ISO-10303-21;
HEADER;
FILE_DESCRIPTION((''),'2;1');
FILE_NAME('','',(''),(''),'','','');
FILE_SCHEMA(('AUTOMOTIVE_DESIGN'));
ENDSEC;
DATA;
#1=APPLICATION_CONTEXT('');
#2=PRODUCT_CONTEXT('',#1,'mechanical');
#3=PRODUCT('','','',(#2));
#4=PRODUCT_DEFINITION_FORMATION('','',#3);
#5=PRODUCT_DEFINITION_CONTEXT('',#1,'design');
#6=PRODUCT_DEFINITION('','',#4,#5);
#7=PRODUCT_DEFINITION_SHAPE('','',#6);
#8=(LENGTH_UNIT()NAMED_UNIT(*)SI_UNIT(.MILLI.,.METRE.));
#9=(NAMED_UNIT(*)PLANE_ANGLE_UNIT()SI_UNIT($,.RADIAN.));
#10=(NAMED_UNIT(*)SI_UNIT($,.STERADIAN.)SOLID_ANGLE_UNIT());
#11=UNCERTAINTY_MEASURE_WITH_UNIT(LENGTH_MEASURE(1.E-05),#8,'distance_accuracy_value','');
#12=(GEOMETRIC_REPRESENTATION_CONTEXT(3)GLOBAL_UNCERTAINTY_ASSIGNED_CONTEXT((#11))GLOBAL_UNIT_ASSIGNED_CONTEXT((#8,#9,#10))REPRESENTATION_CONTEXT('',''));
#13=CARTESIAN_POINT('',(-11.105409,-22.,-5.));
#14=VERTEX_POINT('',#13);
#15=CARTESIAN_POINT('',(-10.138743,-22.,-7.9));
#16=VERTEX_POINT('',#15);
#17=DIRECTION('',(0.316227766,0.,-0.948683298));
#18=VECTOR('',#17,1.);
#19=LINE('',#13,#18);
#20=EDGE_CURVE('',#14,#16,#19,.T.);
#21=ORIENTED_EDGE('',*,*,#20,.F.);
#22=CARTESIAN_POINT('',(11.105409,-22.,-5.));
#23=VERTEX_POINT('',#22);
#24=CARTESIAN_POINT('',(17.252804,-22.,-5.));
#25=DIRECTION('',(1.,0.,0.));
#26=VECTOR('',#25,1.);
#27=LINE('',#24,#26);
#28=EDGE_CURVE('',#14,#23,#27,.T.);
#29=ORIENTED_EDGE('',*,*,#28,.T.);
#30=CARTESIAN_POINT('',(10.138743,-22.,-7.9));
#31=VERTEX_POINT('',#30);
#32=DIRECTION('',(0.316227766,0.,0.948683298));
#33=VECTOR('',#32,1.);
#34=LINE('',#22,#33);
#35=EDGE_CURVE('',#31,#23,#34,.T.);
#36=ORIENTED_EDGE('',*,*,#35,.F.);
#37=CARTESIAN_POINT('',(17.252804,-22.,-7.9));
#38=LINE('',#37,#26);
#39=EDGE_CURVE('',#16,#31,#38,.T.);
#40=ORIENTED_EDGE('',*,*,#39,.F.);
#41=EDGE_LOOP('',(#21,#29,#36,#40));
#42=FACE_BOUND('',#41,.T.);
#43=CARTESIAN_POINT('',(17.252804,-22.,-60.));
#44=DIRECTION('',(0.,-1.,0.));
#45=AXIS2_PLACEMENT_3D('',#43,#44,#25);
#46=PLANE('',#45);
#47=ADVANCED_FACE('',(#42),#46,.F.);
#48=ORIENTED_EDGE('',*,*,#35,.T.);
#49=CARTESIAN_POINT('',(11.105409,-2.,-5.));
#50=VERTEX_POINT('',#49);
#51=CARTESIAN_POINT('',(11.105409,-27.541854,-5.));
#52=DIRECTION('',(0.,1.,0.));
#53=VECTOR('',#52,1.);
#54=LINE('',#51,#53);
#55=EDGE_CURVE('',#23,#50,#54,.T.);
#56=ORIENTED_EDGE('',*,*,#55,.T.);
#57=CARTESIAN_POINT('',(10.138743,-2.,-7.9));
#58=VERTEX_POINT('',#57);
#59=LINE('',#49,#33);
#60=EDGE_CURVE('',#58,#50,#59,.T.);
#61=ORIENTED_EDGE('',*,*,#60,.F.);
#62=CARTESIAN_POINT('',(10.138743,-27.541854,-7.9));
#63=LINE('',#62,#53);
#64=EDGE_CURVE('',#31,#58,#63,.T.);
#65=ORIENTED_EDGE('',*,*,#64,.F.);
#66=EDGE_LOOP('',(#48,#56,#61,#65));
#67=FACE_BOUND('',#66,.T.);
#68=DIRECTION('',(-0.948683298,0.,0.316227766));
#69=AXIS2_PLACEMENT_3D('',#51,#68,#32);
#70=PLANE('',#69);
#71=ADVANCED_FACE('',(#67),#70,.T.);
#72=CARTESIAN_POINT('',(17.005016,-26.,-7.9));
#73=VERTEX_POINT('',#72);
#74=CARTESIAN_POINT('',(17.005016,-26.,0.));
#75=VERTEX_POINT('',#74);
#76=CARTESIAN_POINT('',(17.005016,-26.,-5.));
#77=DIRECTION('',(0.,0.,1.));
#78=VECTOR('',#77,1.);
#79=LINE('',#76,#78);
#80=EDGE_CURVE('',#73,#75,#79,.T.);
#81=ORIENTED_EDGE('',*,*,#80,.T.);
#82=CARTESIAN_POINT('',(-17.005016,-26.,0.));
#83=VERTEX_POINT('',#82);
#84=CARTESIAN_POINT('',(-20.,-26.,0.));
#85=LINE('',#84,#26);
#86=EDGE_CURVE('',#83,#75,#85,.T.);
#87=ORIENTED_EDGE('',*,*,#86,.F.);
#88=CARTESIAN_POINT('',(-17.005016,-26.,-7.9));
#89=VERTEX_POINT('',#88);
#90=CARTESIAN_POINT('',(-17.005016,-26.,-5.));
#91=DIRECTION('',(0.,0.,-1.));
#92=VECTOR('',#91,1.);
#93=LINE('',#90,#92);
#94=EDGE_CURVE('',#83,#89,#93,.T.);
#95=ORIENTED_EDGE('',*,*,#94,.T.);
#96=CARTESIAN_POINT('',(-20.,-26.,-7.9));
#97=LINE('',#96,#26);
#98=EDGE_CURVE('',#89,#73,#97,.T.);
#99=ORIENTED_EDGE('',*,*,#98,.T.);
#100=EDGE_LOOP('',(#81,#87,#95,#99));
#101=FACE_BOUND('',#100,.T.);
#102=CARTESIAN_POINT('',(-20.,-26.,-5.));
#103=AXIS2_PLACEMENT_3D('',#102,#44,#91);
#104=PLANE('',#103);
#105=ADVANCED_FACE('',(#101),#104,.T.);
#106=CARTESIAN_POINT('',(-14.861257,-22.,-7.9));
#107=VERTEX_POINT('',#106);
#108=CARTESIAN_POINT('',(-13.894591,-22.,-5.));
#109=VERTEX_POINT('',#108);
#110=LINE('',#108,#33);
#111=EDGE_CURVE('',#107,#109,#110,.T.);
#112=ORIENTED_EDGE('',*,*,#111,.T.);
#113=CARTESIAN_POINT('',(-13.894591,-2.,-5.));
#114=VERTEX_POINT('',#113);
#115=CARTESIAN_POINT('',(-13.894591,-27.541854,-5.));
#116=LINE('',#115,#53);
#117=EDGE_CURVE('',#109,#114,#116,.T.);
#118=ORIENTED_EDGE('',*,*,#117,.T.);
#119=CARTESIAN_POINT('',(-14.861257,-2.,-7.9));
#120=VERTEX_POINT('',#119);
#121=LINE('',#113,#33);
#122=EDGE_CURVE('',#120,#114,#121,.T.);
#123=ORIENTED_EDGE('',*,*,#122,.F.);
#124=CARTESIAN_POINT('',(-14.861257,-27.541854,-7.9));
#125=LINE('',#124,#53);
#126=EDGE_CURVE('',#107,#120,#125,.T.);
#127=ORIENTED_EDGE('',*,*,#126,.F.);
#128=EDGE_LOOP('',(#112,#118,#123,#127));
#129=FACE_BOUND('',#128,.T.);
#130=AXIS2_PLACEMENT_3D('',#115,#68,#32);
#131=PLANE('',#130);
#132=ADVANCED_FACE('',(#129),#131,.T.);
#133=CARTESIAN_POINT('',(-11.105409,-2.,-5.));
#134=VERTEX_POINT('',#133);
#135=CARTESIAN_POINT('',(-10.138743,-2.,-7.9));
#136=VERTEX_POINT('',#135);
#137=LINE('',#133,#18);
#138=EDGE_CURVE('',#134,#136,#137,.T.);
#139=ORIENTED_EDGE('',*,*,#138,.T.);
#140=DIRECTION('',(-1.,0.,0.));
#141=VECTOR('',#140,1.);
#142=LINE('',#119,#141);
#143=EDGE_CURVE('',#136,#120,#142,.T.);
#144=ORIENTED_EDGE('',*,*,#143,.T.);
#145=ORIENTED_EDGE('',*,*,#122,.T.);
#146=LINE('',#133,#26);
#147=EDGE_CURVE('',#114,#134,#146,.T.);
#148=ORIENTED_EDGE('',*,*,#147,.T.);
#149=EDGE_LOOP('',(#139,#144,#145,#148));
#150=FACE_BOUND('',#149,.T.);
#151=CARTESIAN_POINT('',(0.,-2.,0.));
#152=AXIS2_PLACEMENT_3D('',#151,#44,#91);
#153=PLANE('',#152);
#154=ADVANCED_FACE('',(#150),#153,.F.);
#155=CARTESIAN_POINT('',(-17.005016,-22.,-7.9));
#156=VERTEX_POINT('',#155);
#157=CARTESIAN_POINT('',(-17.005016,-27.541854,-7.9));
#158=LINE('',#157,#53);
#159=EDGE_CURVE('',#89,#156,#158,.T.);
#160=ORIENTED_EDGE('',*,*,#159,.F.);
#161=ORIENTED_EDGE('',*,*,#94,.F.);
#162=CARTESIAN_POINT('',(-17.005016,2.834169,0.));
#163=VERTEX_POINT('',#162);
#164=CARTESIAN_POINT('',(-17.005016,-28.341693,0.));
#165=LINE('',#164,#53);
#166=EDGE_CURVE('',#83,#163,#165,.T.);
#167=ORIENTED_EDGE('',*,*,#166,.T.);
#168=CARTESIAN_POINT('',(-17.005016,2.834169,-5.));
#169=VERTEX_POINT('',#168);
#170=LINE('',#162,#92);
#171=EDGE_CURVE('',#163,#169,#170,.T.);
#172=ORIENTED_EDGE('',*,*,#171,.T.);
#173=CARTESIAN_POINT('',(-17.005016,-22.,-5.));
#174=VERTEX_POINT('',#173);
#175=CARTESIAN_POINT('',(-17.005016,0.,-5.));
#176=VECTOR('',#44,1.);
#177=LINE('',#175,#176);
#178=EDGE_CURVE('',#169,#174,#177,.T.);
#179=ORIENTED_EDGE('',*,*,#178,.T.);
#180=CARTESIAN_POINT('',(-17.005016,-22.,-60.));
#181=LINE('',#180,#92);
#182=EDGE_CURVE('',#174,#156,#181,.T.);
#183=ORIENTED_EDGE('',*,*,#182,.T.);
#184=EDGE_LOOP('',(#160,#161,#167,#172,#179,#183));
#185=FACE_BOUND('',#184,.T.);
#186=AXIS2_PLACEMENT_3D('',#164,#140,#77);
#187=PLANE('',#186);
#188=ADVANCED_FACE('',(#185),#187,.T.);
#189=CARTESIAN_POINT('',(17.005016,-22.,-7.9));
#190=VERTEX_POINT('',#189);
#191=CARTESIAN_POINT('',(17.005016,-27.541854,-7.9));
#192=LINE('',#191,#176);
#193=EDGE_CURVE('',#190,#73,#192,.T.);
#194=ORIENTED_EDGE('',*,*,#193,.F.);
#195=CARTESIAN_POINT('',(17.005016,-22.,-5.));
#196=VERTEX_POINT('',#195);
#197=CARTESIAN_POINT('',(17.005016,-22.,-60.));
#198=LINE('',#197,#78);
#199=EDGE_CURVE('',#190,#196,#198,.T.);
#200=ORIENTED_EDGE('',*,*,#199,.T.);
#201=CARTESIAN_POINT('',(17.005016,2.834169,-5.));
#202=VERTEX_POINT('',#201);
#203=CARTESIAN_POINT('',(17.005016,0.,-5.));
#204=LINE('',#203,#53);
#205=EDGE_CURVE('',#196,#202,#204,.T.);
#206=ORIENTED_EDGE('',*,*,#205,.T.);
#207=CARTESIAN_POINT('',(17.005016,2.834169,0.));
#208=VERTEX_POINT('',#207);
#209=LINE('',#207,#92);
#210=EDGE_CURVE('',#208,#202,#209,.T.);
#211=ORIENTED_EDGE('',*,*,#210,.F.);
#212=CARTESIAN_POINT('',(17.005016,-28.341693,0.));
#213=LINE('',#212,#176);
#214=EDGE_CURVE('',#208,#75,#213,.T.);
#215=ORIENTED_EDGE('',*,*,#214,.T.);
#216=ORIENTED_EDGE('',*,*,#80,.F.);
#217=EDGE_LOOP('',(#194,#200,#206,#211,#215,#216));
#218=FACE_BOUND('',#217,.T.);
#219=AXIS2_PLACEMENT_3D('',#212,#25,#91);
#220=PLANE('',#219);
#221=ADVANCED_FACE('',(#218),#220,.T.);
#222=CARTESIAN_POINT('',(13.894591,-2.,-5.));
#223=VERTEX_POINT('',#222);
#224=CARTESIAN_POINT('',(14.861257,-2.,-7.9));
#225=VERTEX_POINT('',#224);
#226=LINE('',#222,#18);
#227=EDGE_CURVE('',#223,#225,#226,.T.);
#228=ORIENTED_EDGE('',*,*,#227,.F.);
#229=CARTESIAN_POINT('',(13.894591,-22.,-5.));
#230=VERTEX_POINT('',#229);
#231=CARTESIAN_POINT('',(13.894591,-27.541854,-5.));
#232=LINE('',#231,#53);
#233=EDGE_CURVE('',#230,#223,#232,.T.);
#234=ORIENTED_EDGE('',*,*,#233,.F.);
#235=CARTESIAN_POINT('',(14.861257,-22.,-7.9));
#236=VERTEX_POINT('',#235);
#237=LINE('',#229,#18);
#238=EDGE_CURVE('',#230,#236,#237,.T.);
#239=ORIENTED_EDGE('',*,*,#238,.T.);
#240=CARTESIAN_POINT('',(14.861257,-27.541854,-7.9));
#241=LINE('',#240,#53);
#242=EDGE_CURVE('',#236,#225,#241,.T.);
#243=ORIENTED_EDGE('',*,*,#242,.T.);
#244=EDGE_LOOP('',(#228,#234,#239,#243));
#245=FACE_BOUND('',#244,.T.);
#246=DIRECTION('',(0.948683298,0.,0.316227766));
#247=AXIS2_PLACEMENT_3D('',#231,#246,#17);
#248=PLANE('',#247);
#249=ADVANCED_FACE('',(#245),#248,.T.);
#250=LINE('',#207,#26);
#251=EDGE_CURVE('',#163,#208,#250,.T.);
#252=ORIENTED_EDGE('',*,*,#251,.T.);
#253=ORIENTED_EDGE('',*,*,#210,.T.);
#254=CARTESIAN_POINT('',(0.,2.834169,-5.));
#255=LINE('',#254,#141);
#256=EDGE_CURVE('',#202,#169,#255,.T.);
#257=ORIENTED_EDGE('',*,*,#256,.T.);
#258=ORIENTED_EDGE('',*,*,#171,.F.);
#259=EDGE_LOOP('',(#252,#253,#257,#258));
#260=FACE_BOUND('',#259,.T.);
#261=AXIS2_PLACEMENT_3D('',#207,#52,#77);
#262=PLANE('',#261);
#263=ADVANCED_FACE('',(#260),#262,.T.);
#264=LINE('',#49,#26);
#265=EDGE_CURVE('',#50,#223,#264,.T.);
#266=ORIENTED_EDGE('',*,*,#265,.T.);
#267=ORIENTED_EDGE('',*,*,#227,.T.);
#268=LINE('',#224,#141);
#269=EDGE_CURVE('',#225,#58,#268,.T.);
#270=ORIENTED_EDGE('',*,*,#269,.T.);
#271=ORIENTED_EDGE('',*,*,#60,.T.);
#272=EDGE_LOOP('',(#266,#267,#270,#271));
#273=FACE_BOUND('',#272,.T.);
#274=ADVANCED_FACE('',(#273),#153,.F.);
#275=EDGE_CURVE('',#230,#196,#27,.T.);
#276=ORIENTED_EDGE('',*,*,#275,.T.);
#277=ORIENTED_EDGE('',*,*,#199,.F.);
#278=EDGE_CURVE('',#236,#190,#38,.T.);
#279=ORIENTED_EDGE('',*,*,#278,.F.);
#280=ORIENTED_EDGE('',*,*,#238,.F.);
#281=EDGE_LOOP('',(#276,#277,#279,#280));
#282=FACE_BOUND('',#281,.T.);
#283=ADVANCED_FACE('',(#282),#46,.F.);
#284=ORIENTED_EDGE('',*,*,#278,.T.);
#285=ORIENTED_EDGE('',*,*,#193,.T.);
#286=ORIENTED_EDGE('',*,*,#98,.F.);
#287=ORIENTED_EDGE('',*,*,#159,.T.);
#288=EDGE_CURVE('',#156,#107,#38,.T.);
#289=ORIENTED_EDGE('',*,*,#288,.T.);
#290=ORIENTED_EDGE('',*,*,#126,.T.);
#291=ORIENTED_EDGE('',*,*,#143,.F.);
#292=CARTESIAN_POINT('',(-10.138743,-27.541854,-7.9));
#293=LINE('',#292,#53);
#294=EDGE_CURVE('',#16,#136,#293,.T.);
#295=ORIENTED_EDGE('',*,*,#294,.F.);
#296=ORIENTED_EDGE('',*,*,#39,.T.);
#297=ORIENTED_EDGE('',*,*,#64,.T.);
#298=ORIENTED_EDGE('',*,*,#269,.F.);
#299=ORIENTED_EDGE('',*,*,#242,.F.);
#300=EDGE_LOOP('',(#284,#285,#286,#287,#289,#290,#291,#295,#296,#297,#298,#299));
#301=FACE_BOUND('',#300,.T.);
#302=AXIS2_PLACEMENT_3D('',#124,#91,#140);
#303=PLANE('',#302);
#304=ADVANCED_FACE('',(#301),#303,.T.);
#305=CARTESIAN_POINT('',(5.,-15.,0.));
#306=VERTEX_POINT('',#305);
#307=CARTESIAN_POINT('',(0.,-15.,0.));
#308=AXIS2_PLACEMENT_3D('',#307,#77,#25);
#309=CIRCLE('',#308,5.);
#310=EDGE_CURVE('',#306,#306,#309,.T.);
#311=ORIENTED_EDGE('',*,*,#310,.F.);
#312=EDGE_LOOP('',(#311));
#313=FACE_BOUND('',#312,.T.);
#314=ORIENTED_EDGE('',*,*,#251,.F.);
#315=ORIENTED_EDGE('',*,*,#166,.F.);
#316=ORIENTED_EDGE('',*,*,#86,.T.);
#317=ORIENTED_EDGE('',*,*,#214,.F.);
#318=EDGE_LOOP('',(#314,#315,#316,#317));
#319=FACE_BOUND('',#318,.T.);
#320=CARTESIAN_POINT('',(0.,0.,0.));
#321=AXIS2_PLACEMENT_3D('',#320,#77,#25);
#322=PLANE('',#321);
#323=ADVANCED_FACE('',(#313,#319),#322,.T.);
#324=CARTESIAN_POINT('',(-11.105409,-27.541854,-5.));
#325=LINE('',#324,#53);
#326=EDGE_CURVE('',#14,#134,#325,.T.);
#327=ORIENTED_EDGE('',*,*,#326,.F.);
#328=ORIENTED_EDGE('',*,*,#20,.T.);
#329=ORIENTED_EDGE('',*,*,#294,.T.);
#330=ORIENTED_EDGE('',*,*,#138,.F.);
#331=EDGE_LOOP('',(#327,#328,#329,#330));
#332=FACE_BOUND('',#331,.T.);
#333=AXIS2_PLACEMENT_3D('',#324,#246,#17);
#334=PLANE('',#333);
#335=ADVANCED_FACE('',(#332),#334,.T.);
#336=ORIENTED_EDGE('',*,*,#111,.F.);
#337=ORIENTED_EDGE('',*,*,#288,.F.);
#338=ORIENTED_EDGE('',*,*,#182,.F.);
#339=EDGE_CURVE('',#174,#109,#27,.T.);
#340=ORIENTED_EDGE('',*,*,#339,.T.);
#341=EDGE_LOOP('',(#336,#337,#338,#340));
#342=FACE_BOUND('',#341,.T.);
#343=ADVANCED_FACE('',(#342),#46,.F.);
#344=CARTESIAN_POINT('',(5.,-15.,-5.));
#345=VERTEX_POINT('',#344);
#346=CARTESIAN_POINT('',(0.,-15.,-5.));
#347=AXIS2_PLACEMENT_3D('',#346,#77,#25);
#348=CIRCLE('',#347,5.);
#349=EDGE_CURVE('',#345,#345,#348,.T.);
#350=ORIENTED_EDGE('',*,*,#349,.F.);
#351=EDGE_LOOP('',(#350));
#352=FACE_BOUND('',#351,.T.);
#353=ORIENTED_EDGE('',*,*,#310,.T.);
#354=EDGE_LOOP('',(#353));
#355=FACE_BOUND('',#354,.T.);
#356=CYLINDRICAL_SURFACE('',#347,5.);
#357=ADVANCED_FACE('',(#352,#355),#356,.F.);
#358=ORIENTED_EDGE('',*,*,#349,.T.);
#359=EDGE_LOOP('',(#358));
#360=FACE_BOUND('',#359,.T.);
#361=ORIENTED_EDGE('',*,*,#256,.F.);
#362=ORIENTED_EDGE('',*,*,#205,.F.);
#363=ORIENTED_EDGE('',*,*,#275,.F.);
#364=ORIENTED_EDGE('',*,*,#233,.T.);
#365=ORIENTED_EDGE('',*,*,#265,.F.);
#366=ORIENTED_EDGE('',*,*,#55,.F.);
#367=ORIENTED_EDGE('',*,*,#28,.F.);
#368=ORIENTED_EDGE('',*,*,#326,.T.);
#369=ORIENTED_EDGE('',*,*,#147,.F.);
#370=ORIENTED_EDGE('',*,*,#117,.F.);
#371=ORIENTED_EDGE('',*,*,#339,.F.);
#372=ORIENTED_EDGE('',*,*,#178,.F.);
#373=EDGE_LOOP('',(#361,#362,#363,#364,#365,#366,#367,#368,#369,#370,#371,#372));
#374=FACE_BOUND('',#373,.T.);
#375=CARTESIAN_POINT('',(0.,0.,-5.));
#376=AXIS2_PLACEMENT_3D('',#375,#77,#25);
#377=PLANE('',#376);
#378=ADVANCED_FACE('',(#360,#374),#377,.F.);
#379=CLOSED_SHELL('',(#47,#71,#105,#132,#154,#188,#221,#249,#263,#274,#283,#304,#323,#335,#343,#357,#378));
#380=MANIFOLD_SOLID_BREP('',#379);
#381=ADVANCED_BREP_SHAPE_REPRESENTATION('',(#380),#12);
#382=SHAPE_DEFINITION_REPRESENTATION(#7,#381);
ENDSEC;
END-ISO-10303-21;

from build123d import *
from OCP.BRepFilletAPI import BRepFilletAPI_MakeChamfer

# Parameters (mm, degrees)
SKETCH_1_R          = 5
EXTRUDE_1_DEPTH     = 5
EXTRUDE_2_REACH     = 42.012
EXTRUDE_3_DEPTH     = 55
EXTRUDE_4_DEPTH     = 20
FILLET_1_R          = 10
CHAMFER_1_SIZE      = 1
CHAMFER_1_SIZE2     = 1.741048535
CHAMFER_1_SIZE2_2   = 3.661578825
CHAMFER_1_SIZE2_3   = 2.732050808
CUT_EXTRUDE_1_REACH = 86.876
SKETCH_5_R          = 1.65
SKETCH_6_R          = 54.70604167
CUT_EXTRUDE_2_DEPTH = 66.501221402
SKETCH_7_W          = 77.77608505
SKETCH_7_H          = 88.124851988
SKETCH_7_W_2        = 34.010032192
SKETCH_7_H_2        = 31.175862843
CUT_EXTRUDE_3_DEPTH = 41.477277576


with BuildPart() as part:
    # 草图1 → 凸台-拉伸1 (new body)
    with BuildSketch(Plane.XY):
        Polygon((-20, 26), (20, 26), (30, 0), (20, -26), (-20, -26), (-30, 0), align=None)
        with Locations((0, -15)):
            Circle(SKETCH_1_R, mode=Mode.SUBTRACT)
    extrude(amount=-EXTRUDE_1_DEPTH)

    # 凸台-拉伸2: up to this plane
    extrude_2_end = Plane(origin=(0, 24.665063509, -42.72114317), z_dir=(0, 0.499999999999998, -0.8660254037844398))
    # 草图2 → 凸台-拉伸2 (add, up to the surface)
    with BuildSketch(Plane(origin=(0, 0, -5), x_dir=(-1, 0, 0), z_dir=(0, 0, -1)), mode=Mode.PRIVATE) as extrude_2_sk1:
        Polygon((-20, 26), (20, 26), (21.923076923, 21), (-21.923076923, 21), align=None)
    extrude_2_tool1 = split(extrude(extrude_2_sk1.sketch, amount=EXTRUDE_2_REACH, mode=Mode.PRIVATE), bisect_by=extrude_2_end, keep=Keep.BOTH, mode=Mode.PRIVATE)
    add(extrude_2_tool1.solids().sort_by_distance((0, 23.461774, -5))[0])

    # 草图3 → 凸台-拉伸3 (add)
    with BuildSketch(Plane(origin=(0, 0, -5), x_dir=(-1, 0, 0), z_dir=(0, 0, -1))):
        Polygon((23.846153846, -16), (20, -26), (-20, -26), (-23.846153846, -16), (-19.560495915, -16), (-17.252803607, -22), (17.252803607, -22), (19.560495915, -16), align=None)
    extrude(amount=EXTRUDE_3_DEPTH)

    # 草图4 → 凸台-拉伸4 (add)
    with BuildSketch(Plane(origin=(0, -2, 0), x_dir=(1, 0, 0), z_dir=(0, 1, 0))):
        Polygon((11.105409255, 5), (10.138742589, 7.9), (14.861257411, 7.9), (13.894590745, 5), align=None)
        Polygon((-11.105409255, 5), (-13.894590745, 5), (-14.861257411, 7.9), (-10.138742589, 7.9), align=None)
    extrude(amount=-EXTRUDE_4_DEPTH)

    # 圆角1
    fillet_1_edges = [part.edges().sort_by_distance(p)[0] for p in [
        (-21.70332488, -16, -60),
        (21.70332488, -16, -5),
        (-21.70332488, -16, -5),
        (-20.961538462, 23.5, -43.393792901),
        (20.961538462, 23.5, -43.393792901),
    ]]
    fillet(fillet_1_edges, radius=FILLET_1_R - 0.0001)  # a hair under: the kernel refuses the full size

    # 倒角1: one chamfer whose edges measure the first distance from different faces: ONE call of the kernel's chamfer builder (chamfer() names one face for all edges)
    chamfer_1_edges_1 = [part.edges().sort_by_distance(p)[0] for p in [
        (20, 26, -16.238036635),
    ]]
    chamfer_1_side_1 = [part.faces().sort_by_distance(p)[0] for p in [
        (20.161601575, 25.579835904, -16.238036635),
    ]]
    chamfer_1_edges_2 = [part.edges().sort_by_distance(p)[0] for p in [
        (17.633378474, 26, -39.139308282),
        (-17.633378474, 26, -39.139308282),
    ]]
    chamfer_1_side_2 = [part.faces().sort_by_distance(p)[0] for p in [
        (0, 26, -20.586375743),
    ]]
    chamfer_1_edges_3 = [part.edges().sort_by_distance(p)[0] for p in [
        (0, 26, -41.950417228),
    ]]
    chamfer_1_side_3 = [part.faces().sort_by_distance(p)[0] for p in [
        (0, 26, -20.586375743),
    ]]
    chamfer_1_edges_4 = [part.edges().sort_by_distance(p)[0] for p in [
        (-20, 26, -16.238036635),
    ]]
    chamfer_1_side_4 = [part.faces().sort_by_distance(p)[0] for p in [
        (-21.761475348, 21.420164096, -20.181412308),
    ]]
    chamfer_1 = BRepFilletAPI_MakeChamfer(part.part.solid().wrapped)
    for e in chamfer_1_edges_1:
        chamfer_1.Add(CHAMFER_1_SIZE, CHAMFER_1_SIZE2, e.wrapped, chamfer_1_side_1[0].wrapped)  # the first distance lies on this face
    for e in chamfer_1_edges_2:
        chamfer_1.Add(CHAMFER_1_SIZE, CHAMFER_1_SIZE2_2, e.wrapped, chamfer_1_side_2[0].wrapped)  # the first distance lies on this face
    for e in chamfer_1_edges_3:
        chamfer_1.Add(CHAMFER_1_SIZE, CHAMFER_1_SIZE2_3, e.wrapped, chamfer_1_side_3[0].wrapped)  # the first distance lies on this face
    for e in chamfer_1_edges_4:
        chamfer_1.Add(CHAMFER_1_SIZE, CHAMFER_1_SIZE2, e.wrapped, chamfer_1_side_4[0].wrapped)  # the first distance lies on this face
    add(Compound.cast(chamfer_1.Shape()), mode=Mode.REPLACE)

    # 草图5 → 切除-拉伸1 (cut, up to next)
    with BuildSketch(Plane(origin=(0, 26, 0), x_dir=(1, 0, 0), z_dir=(0, 1, 0)), mode=Mode.PRIVATE) as cut_extrude_1_sk1:
        with Locations((14, 36)):
            Circle(SKETCH_5_R)
    cut_extrude_1_tool1 = extrude(cut_extrude_1_sk1.sketch, amount=-CUT_EXTRUDE_1_REACH, mode=Mode.PRIVATE) & part.part
    # 草图5 → 切除-拉伸1 (cut, up to next)
    with BuildSketch(Plane(origin=(0, 26, 0), x_dir=(1, 0, 0), z_dir=(0, 1, 0)), mode=Mode.PRIVATE) as cut_extrude_1_sk2:
        with Locations((14, 8)):
            Circle(SKETCH_5_R)
    cut_extrude_1_tool2 = extrude(cut_extrude_1_sk2.sketch, amount=-CUT_EXTRUDE_1_REACH, mode=Mode.PRIVATE) & part.part
    # 草图5 → 切除-拉伸1 (cut, up to next)
    with BuildSketch(Plane(origin=(0, 26, 0), x_dir=(1, 0, 0), z_dir=(0, 1, 0)), mode=Mode.PRIVATE) as cut_extrude_1_sk3:
        with Locations((-14, 8)):
            Circle(SKETCH_5_R)
    cut_extrude_1_tool3 = extrude(cut_extrude_1_sk3.sketch, amount=-CUT_EXTRUDE_1_REACH, mode=Mode.PRIVATE) & part.part
    # 草图5 → 切除-拉伸1 (cut, up to next)
    with BuildSketch(Plane(origin=(0, 26, 0), x_dir=(1, 0, 0), z_dir=(0, 1, 0)), mode=Mode.PRIVATE) as cut_extrude_1_sk4:
        with Locations((-14, 36)):
            Circle(SKETCH_5_R)
    cut_extrude_1_tool4 = extrude(cut_extrude_1_sk4.sketch, amount=-CUT_EXTRUDE_1_REACH, mode=Mode.PRIVATE) & part.part
    # 草图5 → 切除-拉伸1 (cut, up to next)
    with BuildSketch(Plane(origin=(0, 26, 0), x_dir=(1, 0, 0), z_dir=(0, 1, 0)), mode=Mode.PRIVATE) as cut_extrude_1_sk5:
        with Locations((10, 22)):
            Circle(SKETCH_5_R)
    cut_extrude_1_tool5 = extrude(cut_extrude_1_sk5.sketch, amount=-CUT_EXTRUDE_1_REACH, mode=Mode.PRIVATE) & part.part
    # 草图5 → 切除-拉伸1 (cut, up to next)
    with BuildSketch(Plane(origin=(0, 26, 0), x_dir=(1, 0, 0), z_dir=(0, 1, 0)), mode=Mode.PRIVATE) as cut_extrude_1_sk6:
        with Locations((-10, 22)):
            Circle(SKETCH_5_R)
    cut_extrude_1_tool6 = extrude(cut_extrude_1_sk6.sketch, amount=-CUT_EXTRUDE_1_REACH, mode=Mode.PRIVATE) & part.part
    # 草图5 → 切除-拉伸1 (cut, up to next)
    with BuildSketch(Plane(origin=(0, 26, 0), x_dir=(1, 0, 0), z_dir=(0, 1, 0)), mode=Mode.PRIVATE) as cut_extrude_1_sk7:
        with Locations((0, 12)):
            Circle(SKETCH_5_R)
    cut_extrude_1_tool7 = extrude(cut_extrude_1_sk7.sketch, amount=-CUT_EXTRUDE_1_REACH, mode=Mode.PRIVATE) & part.part
    # 草图5 → 切除-拉伸1 (cut, up to next)
    with BuildSketch(Plane(origin=(0, 26, 0), x_dir=(1, 0, 0), z_dir=(0, 1, 0)), mode=Mode.PRIVATE) as cut_extrude_1_sk8:
        with Locations((0, 32)):
            Circle(SKETCH_5_R)
    cut_extrude_1_tool8 = extrude(cut_extrude_1_sk8.sketch, amount=-CUT_EXTRUDE_1_REACH, mode=Mode.PRIVATE) & part.part
    add(cut_extrude_1_tool1.solids().sort_by_distance((14, 26, -36))[0], mode=Mode.SUBTRACT)
    add(cut_extrude_1_tool2.solids().sort_by_distance((14, 26, -8))[0], mode=Mode.SUBTRACT)
    add(cut_extrude_1_tool3.solids().sort_by_distance((-14, 26, -8))[0], mode=Mode.SUBTRACT)
    add(cut_extrude_1_tool4.solids().sort_by_distance((-14, 26, -36))[0], mode=Mode.SUBTRACT)
    add(cut_extrude_1_tool5.solids().sort_by_distance((10, 26, -22))[0], mode=Mode.SUBTRACT)
    add(cut_extrude_1_tool6.solids().sort_by_distance((-10, 26, -22))[0], mode=Mode.SUBTRACT)
    add(cut_extrude_1_tool7.solids().sort_by_distance((0, 26, -12))[0], mode=Mode.SUBTRACT)
    add(cut_extrude_1_tool8.solids().sort_by_distance((0, 26, -32))[0], mode=Mode.SUBTRACT)

    # 草图6 → 切除-拉伸2 (cut, through all)
    with BuildSketch(Plane(origin=(0, 0, -7.9), x_dir=(-1, 0, 0), z_dir=(0, 0, -1))):
        with Locations((0, -15)):
            Circle(SKETCH_6_R)
    extrude(amount=CUT_EXTRUDE_2_DEPTH, mode=Mode.SUBTRACT)

    # 草图7 → 切除-拉伸3 (cut, through all)
    with BuildSketch(Plane(origin=(0, 0, -7.9), x_dir=(-1, 0, 0), z_dir=(0, 0, -1))):
        with Locations((0, -12.753762072)):
            Rectangle(SKETCH_7_W, SKETCH_7_H)
        with Locations((0, -12.753762073)):
            Rectangle(SKETCH_7_W_2, SKETCH_7_H_2, mode=Mode.SUBTRACT)
    extrude(amount=-CUT_EXTRUDE_3_DEPTH, mode=Mode.SUBTRACT)


solid = part.part
